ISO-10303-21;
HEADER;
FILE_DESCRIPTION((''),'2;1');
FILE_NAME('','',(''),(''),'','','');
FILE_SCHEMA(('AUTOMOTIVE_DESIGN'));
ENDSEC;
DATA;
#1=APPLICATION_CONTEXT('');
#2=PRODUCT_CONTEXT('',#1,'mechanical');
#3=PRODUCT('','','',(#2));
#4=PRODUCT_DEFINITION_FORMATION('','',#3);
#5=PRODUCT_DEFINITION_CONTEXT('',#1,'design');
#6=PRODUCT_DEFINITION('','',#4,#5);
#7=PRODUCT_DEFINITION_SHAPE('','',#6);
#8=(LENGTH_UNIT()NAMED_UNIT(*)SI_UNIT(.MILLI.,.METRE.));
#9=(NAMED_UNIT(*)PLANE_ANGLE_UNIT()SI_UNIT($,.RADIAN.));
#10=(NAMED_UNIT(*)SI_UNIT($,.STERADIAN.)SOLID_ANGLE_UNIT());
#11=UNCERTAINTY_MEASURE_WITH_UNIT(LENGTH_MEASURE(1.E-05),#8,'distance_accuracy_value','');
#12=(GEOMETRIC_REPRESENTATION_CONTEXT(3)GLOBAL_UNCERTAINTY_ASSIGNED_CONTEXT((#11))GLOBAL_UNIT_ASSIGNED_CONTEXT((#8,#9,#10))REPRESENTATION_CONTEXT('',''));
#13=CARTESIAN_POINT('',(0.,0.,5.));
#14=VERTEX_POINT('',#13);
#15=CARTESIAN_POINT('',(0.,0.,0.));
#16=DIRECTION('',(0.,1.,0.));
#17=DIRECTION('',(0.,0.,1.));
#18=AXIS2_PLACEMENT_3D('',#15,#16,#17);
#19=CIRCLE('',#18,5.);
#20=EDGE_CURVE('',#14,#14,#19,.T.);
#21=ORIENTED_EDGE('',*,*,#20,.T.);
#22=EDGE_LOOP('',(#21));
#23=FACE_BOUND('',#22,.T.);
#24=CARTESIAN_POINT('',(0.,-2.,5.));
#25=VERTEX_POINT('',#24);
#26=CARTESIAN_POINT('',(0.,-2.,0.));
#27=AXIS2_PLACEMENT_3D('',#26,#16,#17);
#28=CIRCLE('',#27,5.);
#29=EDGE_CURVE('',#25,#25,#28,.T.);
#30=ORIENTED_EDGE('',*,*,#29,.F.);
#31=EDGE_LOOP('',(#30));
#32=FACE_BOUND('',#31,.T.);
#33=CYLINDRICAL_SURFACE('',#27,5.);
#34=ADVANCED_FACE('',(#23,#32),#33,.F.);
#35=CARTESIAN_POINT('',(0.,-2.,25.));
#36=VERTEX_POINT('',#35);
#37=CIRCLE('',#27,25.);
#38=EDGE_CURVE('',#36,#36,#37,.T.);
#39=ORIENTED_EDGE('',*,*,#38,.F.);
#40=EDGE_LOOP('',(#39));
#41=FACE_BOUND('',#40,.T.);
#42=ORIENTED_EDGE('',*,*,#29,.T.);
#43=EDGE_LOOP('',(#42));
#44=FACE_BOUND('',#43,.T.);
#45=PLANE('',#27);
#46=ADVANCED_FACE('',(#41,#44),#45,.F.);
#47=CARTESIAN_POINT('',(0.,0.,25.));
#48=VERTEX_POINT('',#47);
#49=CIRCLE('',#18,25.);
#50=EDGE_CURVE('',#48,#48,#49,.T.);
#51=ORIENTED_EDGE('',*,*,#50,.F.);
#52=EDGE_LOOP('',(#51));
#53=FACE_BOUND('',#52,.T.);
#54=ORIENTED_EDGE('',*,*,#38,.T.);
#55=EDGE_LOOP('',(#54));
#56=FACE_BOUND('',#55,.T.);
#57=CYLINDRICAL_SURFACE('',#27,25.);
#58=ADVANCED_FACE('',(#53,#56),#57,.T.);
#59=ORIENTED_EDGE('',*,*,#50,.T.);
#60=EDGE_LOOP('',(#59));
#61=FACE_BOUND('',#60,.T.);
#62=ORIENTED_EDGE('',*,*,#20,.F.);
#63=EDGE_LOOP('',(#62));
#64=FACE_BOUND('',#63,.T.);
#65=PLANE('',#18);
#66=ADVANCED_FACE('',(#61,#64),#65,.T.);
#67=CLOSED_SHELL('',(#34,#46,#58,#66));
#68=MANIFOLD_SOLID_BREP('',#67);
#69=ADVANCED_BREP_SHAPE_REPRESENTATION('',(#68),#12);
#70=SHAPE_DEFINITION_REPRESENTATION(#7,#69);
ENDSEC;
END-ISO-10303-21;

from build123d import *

# Parameters (mm, degrees)
SKETCH_1_R             = 25
SKETCH_1_R_2           = 5
SM_BASE_FLANGE_1_DEPTH = 2


# Sheet-metal steps are written as plain solids
with BuildPart() as part:
    # Sketch 1 → 基体-法兰1 (new body)
    with BuildSketch(Plane(origin=(0, 0, 0), x_dir=(1, 0, 0), z_dir=(0, 1, 0))):
        with Locations(Location((0, 0, 0), (0, 0, 270))):
            Circle(SKETCH_1_R)
        with Locations(Location((0, 0, 0), (0, 0, 270))):
            Circle(SKETCH_1_R_2, mode=Mode.SUBTRACT)
    extrude(amount=-SM_BASE_FLANGE_1_DEPTH)


solid = part.part
